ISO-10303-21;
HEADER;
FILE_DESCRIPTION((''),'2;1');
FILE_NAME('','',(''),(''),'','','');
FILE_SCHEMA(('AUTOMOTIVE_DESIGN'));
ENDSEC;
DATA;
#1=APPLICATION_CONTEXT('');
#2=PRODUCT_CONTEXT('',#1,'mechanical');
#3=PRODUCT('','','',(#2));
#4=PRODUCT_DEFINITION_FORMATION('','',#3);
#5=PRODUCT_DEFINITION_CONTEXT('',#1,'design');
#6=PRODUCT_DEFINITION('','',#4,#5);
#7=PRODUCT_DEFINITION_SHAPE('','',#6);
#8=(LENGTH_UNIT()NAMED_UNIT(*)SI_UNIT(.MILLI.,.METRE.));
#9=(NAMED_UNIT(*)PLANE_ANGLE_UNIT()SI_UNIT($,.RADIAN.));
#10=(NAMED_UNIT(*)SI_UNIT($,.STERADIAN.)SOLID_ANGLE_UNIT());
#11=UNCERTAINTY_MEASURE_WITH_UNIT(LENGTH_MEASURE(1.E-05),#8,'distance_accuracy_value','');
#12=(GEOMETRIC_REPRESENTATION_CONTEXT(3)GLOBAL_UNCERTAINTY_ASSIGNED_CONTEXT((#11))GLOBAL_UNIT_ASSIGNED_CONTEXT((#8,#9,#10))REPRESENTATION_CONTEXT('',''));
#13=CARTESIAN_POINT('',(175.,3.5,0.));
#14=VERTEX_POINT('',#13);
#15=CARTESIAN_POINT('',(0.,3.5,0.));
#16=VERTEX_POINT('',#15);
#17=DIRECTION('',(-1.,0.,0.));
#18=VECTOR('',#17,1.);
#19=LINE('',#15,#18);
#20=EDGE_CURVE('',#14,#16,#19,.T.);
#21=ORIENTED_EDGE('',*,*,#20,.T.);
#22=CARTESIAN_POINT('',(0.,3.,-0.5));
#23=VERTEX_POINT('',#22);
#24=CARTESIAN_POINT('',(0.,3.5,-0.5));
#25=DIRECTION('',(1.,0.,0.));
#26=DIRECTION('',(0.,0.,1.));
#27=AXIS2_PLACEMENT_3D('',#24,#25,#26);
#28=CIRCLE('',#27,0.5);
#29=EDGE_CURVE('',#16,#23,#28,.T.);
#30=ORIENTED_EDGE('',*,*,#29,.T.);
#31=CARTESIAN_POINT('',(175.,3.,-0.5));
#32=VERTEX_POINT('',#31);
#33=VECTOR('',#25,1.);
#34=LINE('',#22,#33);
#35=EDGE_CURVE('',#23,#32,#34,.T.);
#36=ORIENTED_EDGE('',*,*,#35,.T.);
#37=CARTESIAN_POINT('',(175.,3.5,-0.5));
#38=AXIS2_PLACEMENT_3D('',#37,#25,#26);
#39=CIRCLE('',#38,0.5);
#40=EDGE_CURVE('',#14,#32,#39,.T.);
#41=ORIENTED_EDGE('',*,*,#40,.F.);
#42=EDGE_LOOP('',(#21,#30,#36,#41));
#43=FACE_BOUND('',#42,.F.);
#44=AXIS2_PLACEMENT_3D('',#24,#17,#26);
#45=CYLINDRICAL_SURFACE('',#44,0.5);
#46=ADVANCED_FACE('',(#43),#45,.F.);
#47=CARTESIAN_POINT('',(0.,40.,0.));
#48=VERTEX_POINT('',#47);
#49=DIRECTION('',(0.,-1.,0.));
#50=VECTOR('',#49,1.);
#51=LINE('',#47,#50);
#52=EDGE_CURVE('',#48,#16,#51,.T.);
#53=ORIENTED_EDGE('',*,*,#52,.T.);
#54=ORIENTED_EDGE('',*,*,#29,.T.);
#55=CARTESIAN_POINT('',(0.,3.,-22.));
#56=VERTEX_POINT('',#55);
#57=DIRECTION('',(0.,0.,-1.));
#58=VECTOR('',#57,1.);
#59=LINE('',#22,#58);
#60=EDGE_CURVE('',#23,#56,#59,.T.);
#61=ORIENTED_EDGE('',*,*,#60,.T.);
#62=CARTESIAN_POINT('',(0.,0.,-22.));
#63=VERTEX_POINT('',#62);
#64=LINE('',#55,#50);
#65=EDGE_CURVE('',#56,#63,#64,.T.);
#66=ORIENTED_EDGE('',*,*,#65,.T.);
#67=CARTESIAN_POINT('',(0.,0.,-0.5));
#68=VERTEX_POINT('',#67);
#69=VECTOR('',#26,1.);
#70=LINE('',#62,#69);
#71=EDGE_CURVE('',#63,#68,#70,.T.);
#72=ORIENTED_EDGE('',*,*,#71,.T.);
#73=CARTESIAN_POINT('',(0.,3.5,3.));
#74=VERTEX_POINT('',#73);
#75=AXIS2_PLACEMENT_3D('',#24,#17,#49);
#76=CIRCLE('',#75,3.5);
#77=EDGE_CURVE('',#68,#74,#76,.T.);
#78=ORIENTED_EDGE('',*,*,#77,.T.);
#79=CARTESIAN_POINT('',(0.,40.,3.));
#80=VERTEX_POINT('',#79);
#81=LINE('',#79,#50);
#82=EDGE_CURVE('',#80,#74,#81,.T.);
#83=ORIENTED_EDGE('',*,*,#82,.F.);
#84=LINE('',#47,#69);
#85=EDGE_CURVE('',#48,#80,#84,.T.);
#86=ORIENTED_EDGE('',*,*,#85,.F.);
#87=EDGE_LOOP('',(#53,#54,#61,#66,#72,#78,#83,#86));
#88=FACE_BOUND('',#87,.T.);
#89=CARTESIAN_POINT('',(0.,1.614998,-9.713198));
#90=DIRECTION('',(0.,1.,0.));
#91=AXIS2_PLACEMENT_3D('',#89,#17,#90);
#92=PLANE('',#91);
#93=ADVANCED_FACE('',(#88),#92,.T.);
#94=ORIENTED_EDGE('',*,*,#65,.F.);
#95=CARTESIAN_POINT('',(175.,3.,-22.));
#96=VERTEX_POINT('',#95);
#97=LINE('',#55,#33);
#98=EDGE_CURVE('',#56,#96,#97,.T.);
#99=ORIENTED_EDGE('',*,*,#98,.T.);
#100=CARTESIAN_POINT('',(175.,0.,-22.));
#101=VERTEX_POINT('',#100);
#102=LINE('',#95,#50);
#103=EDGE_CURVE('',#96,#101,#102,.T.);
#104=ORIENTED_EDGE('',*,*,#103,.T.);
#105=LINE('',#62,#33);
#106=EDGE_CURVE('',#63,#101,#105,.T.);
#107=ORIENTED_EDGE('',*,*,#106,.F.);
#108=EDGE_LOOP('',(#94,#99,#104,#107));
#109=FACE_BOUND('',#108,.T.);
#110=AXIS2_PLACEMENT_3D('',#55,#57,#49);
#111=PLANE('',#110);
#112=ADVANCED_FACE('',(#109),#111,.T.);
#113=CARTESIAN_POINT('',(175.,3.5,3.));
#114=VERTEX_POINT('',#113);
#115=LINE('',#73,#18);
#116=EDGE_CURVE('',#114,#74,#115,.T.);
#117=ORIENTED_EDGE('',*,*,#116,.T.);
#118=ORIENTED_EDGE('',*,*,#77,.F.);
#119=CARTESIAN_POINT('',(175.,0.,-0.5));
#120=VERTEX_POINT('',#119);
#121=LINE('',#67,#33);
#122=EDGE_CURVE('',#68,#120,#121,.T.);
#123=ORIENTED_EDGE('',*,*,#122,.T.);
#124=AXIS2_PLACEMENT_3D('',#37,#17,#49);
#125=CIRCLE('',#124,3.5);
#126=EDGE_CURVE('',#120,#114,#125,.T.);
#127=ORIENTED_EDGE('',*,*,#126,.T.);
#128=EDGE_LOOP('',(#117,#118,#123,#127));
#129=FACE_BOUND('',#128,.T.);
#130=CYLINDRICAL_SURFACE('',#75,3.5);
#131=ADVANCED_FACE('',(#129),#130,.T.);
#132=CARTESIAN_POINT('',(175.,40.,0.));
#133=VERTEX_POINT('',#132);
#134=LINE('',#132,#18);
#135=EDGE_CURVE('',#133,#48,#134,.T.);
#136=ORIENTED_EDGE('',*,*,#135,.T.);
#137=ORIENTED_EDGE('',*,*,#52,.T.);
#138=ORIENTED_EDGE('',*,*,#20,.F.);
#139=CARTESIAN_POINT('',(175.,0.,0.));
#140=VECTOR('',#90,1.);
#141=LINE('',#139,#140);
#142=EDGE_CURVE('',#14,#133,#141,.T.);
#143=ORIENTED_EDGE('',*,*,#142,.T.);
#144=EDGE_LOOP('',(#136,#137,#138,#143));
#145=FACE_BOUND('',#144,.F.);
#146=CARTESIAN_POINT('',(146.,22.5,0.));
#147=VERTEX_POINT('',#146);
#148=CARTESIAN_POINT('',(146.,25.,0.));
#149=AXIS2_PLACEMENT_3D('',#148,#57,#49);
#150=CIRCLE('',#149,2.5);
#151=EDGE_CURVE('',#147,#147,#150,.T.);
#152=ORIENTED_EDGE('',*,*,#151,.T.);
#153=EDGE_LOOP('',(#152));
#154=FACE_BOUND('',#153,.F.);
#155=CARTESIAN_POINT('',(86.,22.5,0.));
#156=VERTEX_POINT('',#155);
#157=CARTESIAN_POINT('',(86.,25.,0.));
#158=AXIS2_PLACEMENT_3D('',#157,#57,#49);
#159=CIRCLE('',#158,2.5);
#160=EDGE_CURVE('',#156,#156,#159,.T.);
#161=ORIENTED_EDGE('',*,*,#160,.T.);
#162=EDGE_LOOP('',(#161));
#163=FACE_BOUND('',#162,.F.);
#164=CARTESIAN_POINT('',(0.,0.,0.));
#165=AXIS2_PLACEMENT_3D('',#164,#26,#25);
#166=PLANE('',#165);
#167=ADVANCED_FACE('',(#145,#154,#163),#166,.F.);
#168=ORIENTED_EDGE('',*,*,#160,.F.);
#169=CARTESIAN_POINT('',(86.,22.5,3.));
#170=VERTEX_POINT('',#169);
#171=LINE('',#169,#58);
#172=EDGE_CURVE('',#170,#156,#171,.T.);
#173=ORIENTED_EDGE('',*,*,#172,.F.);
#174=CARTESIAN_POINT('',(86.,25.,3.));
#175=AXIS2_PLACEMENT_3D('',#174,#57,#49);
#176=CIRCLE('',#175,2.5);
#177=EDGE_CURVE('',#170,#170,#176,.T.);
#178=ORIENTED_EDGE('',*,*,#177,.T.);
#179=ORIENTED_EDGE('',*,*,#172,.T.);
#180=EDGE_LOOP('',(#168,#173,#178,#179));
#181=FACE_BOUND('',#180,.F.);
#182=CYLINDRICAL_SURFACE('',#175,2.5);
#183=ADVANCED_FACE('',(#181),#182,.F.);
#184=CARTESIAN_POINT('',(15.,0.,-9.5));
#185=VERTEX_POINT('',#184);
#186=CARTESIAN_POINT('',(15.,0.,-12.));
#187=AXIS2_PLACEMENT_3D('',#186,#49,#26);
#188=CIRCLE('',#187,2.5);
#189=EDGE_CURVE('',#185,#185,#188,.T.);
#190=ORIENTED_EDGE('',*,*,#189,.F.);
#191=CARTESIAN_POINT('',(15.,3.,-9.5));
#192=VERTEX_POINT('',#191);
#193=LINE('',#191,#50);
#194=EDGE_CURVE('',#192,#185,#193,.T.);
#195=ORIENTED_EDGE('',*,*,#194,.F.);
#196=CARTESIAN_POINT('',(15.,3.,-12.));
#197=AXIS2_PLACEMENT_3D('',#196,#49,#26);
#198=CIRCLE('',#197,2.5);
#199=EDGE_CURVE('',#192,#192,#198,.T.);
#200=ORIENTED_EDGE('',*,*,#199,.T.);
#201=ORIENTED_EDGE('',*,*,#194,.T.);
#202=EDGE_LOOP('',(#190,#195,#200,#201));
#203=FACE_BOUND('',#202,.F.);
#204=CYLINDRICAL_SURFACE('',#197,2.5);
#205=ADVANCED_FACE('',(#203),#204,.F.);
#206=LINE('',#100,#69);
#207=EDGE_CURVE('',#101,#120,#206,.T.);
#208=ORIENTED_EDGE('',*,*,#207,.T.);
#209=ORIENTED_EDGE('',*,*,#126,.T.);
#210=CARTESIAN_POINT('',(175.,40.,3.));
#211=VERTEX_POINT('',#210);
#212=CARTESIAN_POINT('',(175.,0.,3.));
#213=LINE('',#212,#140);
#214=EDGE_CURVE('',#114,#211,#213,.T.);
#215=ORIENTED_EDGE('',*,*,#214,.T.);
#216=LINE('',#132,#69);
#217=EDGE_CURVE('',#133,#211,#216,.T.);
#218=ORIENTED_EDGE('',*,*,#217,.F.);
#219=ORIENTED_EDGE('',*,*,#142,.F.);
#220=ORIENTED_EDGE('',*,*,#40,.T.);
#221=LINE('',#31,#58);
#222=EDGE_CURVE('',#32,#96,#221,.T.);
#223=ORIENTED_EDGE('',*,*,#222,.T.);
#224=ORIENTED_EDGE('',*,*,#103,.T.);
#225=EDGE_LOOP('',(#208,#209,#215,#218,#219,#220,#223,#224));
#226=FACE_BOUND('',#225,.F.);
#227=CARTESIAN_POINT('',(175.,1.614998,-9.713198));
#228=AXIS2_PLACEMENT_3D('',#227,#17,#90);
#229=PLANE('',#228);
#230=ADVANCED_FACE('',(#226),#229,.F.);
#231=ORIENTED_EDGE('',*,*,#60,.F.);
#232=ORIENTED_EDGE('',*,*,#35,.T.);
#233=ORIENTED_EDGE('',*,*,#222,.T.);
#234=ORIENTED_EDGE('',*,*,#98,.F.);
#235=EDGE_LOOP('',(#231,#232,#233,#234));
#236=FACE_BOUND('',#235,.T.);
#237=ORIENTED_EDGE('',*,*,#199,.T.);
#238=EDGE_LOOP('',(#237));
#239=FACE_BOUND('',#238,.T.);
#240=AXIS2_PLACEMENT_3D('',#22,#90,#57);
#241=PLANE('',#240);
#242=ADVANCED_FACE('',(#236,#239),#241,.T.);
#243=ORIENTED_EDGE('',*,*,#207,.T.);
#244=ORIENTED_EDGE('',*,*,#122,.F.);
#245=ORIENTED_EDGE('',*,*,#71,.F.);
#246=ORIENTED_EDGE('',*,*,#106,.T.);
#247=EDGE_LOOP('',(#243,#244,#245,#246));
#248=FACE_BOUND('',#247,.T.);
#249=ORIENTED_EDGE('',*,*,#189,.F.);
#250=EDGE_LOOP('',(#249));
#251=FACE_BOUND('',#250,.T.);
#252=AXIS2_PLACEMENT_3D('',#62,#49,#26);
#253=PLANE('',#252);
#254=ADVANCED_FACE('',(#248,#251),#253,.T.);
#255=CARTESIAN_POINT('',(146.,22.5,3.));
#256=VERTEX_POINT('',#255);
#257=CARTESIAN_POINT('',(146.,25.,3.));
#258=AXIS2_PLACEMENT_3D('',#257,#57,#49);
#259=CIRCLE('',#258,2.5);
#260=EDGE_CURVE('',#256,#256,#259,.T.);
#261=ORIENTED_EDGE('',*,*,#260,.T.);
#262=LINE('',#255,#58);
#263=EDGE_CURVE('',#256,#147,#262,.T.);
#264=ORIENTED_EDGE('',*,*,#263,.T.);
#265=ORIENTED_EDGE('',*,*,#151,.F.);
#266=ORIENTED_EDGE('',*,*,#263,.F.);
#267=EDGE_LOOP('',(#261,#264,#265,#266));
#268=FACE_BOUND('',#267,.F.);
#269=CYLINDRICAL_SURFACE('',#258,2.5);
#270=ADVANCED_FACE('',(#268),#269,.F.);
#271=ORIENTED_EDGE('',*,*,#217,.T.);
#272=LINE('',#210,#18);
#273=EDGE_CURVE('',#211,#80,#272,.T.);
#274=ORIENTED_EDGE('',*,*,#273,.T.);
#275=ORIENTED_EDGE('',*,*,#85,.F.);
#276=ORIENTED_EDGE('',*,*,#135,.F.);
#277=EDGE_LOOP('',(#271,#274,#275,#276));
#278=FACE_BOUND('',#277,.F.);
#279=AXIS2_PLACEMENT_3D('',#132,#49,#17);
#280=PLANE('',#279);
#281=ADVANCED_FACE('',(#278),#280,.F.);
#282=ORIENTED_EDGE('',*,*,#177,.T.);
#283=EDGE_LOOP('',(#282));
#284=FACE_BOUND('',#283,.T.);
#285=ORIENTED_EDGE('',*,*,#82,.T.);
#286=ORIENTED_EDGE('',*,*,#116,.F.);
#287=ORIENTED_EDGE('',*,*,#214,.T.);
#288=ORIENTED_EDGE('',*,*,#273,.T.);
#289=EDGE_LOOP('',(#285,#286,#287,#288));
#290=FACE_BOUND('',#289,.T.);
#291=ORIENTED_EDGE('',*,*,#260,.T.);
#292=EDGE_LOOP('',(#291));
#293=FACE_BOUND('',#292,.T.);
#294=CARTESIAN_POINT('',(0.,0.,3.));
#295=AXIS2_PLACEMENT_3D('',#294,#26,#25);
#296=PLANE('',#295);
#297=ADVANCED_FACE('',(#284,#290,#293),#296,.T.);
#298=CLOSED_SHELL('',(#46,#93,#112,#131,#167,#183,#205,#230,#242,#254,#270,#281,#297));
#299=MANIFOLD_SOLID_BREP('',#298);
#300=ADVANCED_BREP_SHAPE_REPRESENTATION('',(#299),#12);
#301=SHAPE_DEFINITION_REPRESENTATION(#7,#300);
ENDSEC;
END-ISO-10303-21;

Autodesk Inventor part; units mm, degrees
ref_plane "YZ Plane" through (0, 0, 0) normal (1, 0, 0) x (0, 1, 0)
ref_plane "XZ Plane" through (0, 0, 0) normal (0, 1, 0) x (-1, 0, 0)
ref_plane "XY Plane" through (0, 0, 0) normal (0, 0, 1) x (1, 0, 0)
sketch "Sketch1" plane through (0, 0, 0) normal (0, 0, 1) x (1, 0, 0)
  line L0 (0, 0) -> (175, 0)
  line L1 (175, 0) -> (175, 40)
  line L2 (175, 40) -> (0, 40)
  line L3 (0, 40) -> (0, 0)
  dimension "d0" = 175
  dimension "d1" = 40
extrude "Plate1" add sketch "Sketch1" along normal blind 3
sketch "Sketch2" plane through (0, 3, 3) normal (0, -1, 0) x (1, 0, 0)
  line L0 (175, 0) -> (0, 0)
  line L1 (0, 0) -> (0, -25)
  line L2 (0, -25) -> (175, -25)
  line L3 (175, -25) -> (175, 0)
edge flange "Flange1" height 25 angle 90 thickness 3 bend radius 0.5 thickness toward (0, -1, 0) relief tear relief width 3 relief depth 1.5 edges at (87.5, 0, 0) wall of the first edge with corners at (175, 3, 3) (0, 3, 3) (0, 3, -22) (175, 3, -22)
bend "Bend1"
corner "Corner1"
hole "Hole3" at (146, 25, 3) direction (0, 0, -1) diameter 5 end through all
hole "Hole4" at (86, 25, 3) direction (0, 0, -1) diameter 5 end through all
hole "Hole5" at (15, 3, -12) direction (0, -1, 0) diameter 5 end through all
equation "\"d38\" = Thickness"
equation "\"d47\" = Thickness"
equation "\"d56\" = Thickness"
equation "\"d3\" = BendReliefWidth"
equation "\"d4\" = BendReliefDepth"
equation "\"d5\" = MinimumRemnant"
equation "\"d6\" = BendRadius"
equation "\"d10\" = CornerReliefSize"
equation "\"d11\" = GapSize"
equation "\"d12\" = JacobiRadiusSize"
equation "\"BendRadius\" = Thickness"
equation "\"BendReliefWidth\" = Thickness"
equation "\"BendReliefDepth\" = 0.5 * Thickness"
equation "\"CornerReliefSize\" = 4 * Thickness"
equation "\"MinimumRemnant\" = 2 * Thickness"
equation "\"TransitionRadius\" = BendRadius"
equation "\"JacobiRadiusSize\" = BendRadius"
equation "\"GapSize\" = Thickness"
equation "\"d2\" = BendRadius"
equation "\"Thickness\" = 3"
properties part number "endcapOptionLeftAngle" material "Aluminum 6061"
